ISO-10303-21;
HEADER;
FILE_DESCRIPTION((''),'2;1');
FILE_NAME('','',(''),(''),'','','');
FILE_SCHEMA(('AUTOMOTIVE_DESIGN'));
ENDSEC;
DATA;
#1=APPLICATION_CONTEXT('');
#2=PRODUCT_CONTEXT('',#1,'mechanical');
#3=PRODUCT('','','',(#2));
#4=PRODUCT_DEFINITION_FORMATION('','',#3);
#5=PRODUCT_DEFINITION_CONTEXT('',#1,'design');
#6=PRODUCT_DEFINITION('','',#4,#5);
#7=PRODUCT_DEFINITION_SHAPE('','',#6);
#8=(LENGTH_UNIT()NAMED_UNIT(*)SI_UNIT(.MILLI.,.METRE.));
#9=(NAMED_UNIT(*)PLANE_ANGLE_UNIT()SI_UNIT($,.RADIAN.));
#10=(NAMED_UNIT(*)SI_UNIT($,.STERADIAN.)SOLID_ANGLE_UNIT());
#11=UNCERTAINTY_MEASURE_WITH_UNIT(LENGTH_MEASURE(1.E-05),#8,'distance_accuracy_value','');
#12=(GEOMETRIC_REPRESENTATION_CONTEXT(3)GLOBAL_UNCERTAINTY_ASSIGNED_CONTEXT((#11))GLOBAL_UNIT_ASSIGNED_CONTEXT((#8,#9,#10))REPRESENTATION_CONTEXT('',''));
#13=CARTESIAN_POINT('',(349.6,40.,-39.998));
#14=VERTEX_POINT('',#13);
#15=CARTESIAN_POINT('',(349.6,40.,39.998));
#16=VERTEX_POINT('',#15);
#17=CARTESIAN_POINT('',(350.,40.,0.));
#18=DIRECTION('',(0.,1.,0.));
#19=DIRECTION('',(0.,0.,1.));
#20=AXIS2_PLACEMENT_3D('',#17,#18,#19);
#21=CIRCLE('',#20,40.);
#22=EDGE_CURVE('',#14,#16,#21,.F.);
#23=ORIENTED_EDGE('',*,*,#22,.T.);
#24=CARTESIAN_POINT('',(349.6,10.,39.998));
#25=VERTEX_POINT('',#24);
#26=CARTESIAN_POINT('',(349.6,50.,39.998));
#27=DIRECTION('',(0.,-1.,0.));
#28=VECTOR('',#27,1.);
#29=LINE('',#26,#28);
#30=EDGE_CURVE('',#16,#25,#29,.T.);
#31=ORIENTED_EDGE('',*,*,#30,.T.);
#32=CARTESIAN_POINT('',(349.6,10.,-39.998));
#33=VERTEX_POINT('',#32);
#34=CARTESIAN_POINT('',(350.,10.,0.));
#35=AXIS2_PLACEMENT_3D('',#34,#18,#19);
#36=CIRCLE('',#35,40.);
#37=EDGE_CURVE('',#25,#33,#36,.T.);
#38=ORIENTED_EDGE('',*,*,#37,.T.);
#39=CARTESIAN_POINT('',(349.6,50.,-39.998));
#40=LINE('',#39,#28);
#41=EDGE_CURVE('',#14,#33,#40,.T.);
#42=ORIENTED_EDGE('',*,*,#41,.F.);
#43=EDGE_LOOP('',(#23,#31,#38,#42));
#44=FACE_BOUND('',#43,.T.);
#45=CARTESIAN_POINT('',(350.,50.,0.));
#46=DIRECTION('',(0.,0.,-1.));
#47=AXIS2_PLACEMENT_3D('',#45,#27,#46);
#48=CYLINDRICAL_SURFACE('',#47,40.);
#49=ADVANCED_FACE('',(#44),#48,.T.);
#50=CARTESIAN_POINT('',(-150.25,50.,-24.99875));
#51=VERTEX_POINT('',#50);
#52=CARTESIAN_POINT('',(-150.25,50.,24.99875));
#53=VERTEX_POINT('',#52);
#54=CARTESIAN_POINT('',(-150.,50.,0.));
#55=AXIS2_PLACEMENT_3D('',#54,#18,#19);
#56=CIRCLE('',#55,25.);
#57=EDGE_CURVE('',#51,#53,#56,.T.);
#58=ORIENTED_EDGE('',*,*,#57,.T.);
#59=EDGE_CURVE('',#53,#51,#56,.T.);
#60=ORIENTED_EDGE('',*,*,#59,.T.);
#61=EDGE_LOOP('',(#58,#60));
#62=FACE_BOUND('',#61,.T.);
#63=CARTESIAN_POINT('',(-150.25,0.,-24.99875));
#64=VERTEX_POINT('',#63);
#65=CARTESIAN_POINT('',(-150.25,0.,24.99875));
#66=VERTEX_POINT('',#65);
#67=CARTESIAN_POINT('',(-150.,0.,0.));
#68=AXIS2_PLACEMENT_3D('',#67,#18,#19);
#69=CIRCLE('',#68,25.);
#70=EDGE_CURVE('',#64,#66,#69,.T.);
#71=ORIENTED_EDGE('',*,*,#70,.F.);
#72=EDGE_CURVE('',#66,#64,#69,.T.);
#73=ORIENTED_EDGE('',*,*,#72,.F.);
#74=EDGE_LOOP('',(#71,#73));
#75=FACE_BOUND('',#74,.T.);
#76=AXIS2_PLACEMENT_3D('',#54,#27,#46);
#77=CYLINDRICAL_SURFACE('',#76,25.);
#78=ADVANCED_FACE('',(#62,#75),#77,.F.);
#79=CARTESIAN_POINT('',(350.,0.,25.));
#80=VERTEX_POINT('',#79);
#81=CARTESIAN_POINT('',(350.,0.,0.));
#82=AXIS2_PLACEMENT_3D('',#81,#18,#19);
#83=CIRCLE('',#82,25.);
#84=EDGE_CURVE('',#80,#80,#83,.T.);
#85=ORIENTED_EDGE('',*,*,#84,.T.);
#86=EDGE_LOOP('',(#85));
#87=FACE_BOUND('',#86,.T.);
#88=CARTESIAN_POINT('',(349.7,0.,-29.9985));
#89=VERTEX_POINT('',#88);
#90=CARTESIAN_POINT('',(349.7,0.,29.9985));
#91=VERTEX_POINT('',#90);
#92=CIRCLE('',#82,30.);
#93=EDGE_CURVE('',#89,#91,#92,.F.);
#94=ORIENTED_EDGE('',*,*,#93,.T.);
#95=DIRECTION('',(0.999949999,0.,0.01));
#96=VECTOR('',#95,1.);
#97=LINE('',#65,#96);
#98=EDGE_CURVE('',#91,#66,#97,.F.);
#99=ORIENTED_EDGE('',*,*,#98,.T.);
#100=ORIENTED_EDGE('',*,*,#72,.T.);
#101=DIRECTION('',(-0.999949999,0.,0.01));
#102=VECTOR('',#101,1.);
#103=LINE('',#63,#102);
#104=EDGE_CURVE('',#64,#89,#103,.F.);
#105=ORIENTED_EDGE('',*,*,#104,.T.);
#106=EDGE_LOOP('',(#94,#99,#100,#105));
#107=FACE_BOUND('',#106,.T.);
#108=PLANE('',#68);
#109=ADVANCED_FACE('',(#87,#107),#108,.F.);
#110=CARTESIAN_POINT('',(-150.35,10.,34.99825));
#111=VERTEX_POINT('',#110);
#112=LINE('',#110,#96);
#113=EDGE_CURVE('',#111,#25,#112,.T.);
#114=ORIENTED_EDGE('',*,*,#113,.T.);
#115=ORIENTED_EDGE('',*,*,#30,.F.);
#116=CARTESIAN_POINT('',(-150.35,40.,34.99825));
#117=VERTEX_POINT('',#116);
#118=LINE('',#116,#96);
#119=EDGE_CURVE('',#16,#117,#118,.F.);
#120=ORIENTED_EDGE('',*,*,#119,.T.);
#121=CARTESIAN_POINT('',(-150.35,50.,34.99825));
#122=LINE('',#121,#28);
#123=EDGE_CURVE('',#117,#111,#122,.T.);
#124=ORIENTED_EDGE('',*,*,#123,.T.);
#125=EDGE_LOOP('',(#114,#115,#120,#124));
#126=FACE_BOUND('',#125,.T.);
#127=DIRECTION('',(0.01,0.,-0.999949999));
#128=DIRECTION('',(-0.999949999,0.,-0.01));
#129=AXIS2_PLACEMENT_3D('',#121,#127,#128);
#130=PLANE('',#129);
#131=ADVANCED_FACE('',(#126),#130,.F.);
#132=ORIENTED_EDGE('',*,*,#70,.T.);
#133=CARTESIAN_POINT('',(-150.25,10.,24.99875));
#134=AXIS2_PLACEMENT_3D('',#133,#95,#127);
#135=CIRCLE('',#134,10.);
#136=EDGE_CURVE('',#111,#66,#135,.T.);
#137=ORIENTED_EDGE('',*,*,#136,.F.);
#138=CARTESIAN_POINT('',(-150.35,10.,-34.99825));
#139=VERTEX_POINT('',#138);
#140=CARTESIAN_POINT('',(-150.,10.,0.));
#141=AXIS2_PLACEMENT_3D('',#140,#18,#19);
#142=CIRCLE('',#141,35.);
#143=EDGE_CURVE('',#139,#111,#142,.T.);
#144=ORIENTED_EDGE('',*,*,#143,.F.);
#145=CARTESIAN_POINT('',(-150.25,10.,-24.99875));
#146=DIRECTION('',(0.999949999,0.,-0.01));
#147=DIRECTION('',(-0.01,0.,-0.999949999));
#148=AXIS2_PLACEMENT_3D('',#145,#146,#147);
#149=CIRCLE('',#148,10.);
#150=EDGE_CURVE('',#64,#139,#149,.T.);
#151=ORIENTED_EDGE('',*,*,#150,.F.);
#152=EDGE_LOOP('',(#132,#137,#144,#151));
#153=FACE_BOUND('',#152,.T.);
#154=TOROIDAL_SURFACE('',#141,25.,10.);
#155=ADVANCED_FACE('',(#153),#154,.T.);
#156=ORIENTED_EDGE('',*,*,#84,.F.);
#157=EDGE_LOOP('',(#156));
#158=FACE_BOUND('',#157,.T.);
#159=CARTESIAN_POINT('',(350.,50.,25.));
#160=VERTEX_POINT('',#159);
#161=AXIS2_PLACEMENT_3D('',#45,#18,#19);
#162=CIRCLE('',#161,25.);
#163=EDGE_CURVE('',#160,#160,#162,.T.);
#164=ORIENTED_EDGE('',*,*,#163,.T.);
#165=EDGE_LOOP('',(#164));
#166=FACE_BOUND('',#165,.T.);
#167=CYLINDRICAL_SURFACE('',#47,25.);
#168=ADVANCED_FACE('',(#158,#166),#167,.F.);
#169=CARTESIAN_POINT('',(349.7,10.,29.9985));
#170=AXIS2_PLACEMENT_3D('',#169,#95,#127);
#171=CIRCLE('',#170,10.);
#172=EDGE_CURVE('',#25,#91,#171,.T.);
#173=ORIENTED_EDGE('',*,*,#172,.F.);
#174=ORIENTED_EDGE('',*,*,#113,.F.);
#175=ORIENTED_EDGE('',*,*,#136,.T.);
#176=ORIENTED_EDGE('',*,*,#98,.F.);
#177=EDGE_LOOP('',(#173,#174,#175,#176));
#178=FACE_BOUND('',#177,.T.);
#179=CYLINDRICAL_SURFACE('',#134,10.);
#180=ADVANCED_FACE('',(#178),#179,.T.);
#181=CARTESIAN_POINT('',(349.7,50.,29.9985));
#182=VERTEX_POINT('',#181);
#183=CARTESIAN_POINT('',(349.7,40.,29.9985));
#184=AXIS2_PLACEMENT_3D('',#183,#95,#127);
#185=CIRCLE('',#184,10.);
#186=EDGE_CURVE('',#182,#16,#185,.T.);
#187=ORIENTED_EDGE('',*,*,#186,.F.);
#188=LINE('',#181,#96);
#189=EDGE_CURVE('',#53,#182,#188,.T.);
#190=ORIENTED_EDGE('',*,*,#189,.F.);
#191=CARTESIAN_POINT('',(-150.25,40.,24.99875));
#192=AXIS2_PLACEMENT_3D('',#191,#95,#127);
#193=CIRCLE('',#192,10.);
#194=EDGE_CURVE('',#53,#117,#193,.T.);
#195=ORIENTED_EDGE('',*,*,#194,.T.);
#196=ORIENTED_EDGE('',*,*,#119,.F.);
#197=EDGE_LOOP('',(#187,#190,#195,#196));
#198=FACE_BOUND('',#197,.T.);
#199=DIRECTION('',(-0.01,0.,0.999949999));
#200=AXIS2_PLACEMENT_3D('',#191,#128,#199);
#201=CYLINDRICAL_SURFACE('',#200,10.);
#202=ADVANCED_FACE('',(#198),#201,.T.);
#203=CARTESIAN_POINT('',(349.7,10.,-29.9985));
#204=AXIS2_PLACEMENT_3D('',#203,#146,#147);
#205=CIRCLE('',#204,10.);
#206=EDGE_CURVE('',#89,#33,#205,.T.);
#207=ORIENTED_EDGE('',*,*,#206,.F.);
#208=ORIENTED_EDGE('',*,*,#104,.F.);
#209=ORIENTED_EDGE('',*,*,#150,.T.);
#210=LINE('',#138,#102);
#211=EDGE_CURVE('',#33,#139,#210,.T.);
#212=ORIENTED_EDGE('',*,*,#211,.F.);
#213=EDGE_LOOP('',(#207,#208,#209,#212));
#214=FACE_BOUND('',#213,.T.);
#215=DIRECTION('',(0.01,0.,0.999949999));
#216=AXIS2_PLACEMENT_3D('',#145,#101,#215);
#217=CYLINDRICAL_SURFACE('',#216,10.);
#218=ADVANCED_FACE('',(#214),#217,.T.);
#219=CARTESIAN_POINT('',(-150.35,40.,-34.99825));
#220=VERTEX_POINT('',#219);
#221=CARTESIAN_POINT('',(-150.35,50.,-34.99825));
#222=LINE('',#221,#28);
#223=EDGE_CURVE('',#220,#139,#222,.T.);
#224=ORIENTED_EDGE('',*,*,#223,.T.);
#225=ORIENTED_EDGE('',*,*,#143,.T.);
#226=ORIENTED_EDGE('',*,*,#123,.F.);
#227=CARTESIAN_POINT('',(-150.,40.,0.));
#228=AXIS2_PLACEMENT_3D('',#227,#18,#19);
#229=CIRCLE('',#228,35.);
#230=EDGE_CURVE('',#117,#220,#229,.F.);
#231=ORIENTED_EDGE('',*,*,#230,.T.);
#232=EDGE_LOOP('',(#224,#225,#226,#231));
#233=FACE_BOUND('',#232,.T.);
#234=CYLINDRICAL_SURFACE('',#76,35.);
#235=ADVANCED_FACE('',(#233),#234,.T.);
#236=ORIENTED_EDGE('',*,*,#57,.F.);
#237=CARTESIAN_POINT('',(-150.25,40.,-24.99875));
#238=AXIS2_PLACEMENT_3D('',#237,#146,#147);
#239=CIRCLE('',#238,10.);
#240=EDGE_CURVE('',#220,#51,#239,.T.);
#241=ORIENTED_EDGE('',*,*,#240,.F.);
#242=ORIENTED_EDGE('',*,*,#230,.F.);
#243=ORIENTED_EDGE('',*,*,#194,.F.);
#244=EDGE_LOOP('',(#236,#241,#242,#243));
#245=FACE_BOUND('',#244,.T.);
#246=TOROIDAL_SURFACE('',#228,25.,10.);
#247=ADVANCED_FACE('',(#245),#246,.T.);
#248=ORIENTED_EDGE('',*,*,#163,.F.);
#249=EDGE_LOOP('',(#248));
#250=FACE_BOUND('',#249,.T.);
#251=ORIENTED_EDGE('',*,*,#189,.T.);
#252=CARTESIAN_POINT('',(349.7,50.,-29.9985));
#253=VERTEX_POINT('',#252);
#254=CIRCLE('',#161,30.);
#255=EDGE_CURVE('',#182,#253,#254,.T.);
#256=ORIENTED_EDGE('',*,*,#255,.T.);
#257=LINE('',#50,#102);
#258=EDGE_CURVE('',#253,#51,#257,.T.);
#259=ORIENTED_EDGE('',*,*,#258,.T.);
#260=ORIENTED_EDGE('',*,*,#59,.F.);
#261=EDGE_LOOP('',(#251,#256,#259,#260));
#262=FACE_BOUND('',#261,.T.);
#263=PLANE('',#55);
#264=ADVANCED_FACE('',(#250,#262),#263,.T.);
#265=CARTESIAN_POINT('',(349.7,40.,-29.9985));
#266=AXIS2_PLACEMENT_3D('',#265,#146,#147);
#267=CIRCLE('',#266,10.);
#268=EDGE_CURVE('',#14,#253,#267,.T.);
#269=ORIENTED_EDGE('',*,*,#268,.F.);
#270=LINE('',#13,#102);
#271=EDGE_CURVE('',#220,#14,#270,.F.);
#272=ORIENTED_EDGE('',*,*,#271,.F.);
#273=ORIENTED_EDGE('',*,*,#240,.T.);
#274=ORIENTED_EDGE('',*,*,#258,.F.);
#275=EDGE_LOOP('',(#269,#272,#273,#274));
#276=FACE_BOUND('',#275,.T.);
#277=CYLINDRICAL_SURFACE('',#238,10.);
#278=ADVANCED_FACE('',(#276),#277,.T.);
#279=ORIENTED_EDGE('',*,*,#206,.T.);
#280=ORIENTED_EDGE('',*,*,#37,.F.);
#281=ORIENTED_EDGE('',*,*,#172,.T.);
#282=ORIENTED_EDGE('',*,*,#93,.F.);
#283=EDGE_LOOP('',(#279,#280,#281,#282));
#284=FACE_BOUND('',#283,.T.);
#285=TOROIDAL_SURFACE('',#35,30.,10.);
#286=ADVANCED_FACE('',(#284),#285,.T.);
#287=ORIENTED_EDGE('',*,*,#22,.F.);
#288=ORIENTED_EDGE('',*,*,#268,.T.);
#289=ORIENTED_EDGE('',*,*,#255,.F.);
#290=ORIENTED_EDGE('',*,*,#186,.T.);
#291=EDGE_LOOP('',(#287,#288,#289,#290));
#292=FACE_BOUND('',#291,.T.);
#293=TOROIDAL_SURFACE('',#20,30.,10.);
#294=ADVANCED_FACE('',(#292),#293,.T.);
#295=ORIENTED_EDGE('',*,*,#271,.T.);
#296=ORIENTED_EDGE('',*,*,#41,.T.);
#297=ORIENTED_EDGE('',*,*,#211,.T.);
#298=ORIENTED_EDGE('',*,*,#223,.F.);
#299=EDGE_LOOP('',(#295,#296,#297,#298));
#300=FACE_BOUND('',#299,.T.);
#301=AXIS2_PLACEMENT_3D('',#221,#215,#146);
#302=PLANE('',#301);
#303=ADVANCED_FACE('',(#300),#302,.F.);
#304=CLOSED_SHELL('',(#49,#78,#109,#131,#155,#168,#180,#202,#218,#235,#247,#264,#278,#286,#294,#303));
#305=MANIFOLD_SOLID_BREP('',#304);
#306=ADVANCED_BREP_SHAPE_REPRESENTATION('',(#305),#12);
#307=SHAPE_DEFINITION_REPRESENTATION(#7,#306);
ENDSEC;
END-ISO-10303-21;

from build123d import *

# Parameters (mm, degrees)
CROQUIS1_R              = 25
SALIENTE_EXTRUIR1_DEPTH = 50
REDONDEO1_R             = 10


with BuildPart() as part:
    # Croquis1 → Saliente-Extruir1 (new body)
    with BuildSketch(Plane(origin=(0, 0, 0), x_dir=(1, 0, 0), z_dir=(0, 1, 0))):
        with BuildLine():
            Line((-150.35, 34.998249956), (349.6, 39.99799995))
            ThreePointArc((349.6, 39.99799995), (390, 0), (349.6, -39.99799995))
            Line((349.6, -39.99799995), (-150.35, -34.998249956))
            ThreePointArc((-150.35, -34.998249956), (-185, 0), (-150.35, 34.998249956))
        make_face()
        with Locations(Location((-150, 0, 0), (0, 0, 270))):
            Circle(CROQUIS1_R, mode=Mode.SUBTRACT)
        with Locations(Location((350, 0, 0), (0, 0, 270))):
            Circle(CROQUIS1_R, mode=Mode.SUBTRACT)
    extrude(amount=SALIENTE_EXTRUIR1_DEPTH)

    # Redondeo1
    redondeo1_edges = [part.edges().sort_by_distance(p)[0] for p in [
        (390, 50, 0),
        (99.625, 50, -37.498124953),
        (-185, 50, 0),
        (99.625, 0, -37.498124953),
        (390, 0, 0),
        (99.625, 0, 37.498124953),
        (-185, 0, 0),
        (99.625, 50, 37.498124953),
    ]]
    fillet(redondeo1_edges, radius=REDONDEO1_R - 0.0001)  # a hair under: the kernel refuses the full size


solid = part.part
